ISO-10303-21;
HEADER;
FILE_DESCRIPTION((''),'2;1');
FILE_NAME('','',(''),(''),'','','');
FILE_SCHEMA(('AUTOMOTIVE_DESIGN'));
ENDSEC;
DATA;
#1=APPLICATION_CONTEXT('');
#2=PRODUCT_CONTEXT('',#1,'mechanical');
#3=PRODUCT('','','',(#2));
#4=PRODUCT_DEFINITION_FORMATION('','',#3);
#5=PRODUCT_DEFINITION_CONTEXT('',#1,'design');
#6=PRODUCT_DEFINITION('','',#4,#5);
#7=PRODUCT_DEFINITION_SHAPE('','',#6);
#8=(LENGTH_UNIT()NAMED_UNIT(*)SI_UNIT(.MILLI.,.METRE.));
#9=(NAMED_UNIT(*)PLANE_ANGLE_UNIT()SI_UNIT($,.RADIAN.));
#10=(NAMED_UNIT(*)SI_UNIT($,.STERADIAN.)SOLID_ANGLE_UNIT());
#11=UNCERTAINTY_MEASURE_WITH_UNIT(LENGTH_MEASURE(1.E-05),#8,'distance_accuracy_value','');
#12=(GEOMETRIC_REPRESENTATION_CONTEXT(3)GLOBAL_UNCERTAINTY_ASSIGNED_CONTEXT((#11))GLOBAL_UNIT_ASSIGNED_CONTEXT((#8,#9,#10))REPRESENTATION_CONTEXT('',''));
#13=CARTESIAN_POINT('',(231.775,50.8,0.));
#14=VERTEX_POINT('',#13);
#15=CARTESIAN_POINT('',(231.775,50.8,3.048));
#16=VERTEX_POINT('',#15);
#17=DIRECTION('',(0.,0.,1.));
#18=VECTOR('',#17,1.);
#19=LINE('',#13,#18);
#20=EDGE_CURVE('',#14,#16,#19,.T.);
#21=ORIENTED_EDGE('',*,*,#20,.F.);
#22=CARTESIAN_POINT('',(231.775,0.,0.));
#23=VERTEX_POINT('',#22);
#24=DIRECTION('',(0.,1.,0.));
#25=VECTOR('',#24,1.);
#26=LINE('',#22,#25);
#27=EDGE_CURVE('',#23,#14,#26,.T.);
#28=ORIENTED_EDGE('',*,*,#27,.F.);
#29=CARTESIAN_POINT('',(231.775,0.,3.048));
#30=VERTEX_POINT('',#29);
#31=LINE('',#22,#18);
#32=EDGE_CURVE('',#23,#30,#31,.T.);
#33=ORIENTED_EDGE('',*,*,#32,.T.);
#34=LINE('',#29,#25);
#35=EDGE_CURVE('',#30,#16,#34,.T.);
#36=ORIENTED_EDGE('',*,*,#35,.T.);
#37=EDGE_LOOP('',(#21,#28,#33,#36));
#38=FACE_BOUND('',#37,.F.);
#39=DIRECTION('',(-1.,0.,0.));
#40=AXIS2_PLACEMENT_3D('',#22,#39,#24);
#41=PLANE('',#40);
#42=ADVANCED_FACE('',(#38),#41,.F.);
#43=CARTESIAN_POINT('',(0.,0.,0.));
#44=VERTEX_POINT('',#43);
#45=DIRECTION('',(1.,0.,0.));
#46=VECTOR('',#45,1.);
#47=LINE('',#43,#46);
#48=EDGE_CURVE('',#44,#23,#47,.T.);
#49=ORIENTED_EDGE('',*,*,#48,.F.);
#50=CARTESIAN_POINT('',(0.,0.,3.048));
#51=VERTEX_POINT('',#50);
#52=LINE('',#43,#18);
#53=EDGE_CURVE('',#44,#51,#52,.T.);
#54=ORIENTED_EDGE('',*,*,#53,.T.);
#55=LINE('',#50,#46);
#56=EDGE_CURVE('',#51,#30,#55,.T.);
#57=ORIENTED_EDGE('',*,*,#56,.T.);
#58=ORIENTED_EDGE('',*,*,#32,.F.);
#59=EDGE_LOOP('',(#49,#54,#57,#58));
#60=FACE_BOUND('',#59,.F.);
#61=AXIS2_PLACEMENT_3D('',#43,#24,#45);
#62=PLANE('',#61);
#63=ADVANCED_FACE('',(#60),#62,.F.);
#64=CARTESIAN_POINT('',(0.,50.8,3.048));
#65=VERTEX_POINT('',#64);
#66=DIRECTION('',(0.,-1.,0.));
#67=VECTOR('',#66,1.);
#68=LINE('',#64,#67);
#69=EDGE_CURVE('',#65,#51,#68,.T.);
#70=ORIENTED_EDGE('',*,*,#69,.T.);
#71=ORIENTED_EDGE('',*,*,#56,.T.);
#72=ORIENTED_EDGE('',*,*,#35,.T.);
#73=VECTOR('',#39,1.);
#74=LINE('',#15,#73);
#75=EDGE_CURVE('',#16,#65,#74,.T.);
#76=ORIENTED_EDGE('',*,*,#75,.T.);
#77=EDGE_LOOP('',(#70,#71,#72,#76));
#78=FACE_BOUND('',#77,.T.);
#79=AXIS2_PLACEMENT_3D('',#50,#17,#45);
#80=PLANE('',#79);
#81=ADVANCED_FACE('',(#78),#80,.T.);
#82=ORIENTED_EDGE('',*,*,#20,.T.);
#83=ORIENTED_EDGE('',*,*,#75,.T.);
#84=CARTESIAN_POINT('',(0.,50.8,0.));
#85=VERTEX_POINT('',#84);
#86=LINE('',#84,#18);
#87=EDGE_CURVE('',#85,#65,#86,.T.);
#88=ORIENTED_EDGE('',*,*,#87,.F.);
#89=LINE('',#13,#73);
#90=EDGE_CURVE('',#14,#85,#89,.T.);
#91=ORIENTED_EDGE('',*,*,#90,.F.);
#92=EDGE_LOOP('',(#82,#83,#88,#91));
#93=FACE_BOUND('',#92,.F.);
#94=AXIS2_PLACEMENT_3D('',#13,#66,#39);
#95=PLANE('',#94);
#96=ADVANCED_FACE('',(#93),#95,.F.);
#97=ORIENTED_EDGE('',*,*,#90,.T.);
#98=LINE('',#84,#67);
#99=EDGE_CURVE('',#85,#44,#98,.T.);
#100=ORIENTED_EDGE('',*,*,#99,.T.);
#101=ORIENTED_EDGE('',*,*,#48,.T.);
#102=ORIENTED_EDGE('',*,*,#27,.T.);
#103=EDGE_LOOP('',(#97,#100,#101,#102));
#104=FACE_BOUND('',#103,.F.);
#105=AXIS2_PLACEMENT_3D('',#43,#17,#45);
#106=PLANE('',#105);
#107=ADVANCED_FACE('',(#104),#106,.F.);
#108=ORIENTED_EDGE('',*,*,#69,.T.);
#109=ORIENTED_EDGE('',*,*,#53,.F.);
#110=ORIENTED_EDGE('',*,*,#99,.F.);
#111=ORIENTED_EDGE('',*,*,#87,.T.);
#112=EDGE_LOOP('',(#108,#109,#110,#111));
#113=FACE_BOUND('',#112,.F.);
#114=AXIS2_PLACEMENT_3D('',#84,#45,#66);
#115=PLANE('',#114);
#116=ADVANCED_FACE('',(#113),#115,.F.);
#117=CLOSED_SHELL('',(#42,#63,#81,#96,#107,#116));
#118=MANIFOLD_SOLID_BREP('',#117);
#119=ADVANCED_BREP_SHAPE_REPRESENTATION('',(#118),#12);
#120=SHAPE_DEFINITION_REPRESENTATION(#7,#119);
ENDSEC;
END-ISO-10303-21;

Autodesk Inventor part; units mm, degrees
ref_plane "YZ Plane" through (0, 0, 0) normal (1, 0, 0) x (0, 1, 0)
ref_plane "XZ Plane" through (0, 0, 0) normal (0, 1, 0) x (-1, 0, 0)
ref_plane "XY Plane" through (0, 0, 0) normal (0, 0, 1) x (1, 0, 0)
sketch "Sketch1" plane through (0, 0, 0) normal (0, 0, 1) x (1, 0, 0)
  line L0 (0, 0) -> (231.775, 0)
  line L1 (231.775, 0) -> (231.775, 50.8)
  line L2 (231.775, 50.8) -> (0, 50.8)
  line L3 (0, 50.8) -> (0, 0)
  line L4 (0, 25.4) -> (231.775, 25.4) construction
  dimension "d0" = 231.775
  dimension "d1" = 50.8
extrude "Plate1" add sketch "Sketch1" along normal blind 3.048
equation "\"BendRadius\" = Thickness"
equation "\"BendReliefWidth\" = Thickness"
equation "\"BendReliefDepth\" = 0.5 * Thickness"
equation "\"CornerReliefSize\" = 4 * Thickness"
equation "\"MinimumRemnant\" = 2 * Thickness"
equation "\"TransitionRadius\" = BendRadius"
equation "\"JacobiRadiusSize\" = BendRadius"
equation "\"GapSize\" = Thickness"
equation "\"d2\" = BendRadius"
equation "\"Thickness\" = 3.048"
properties part number "cross brace"
